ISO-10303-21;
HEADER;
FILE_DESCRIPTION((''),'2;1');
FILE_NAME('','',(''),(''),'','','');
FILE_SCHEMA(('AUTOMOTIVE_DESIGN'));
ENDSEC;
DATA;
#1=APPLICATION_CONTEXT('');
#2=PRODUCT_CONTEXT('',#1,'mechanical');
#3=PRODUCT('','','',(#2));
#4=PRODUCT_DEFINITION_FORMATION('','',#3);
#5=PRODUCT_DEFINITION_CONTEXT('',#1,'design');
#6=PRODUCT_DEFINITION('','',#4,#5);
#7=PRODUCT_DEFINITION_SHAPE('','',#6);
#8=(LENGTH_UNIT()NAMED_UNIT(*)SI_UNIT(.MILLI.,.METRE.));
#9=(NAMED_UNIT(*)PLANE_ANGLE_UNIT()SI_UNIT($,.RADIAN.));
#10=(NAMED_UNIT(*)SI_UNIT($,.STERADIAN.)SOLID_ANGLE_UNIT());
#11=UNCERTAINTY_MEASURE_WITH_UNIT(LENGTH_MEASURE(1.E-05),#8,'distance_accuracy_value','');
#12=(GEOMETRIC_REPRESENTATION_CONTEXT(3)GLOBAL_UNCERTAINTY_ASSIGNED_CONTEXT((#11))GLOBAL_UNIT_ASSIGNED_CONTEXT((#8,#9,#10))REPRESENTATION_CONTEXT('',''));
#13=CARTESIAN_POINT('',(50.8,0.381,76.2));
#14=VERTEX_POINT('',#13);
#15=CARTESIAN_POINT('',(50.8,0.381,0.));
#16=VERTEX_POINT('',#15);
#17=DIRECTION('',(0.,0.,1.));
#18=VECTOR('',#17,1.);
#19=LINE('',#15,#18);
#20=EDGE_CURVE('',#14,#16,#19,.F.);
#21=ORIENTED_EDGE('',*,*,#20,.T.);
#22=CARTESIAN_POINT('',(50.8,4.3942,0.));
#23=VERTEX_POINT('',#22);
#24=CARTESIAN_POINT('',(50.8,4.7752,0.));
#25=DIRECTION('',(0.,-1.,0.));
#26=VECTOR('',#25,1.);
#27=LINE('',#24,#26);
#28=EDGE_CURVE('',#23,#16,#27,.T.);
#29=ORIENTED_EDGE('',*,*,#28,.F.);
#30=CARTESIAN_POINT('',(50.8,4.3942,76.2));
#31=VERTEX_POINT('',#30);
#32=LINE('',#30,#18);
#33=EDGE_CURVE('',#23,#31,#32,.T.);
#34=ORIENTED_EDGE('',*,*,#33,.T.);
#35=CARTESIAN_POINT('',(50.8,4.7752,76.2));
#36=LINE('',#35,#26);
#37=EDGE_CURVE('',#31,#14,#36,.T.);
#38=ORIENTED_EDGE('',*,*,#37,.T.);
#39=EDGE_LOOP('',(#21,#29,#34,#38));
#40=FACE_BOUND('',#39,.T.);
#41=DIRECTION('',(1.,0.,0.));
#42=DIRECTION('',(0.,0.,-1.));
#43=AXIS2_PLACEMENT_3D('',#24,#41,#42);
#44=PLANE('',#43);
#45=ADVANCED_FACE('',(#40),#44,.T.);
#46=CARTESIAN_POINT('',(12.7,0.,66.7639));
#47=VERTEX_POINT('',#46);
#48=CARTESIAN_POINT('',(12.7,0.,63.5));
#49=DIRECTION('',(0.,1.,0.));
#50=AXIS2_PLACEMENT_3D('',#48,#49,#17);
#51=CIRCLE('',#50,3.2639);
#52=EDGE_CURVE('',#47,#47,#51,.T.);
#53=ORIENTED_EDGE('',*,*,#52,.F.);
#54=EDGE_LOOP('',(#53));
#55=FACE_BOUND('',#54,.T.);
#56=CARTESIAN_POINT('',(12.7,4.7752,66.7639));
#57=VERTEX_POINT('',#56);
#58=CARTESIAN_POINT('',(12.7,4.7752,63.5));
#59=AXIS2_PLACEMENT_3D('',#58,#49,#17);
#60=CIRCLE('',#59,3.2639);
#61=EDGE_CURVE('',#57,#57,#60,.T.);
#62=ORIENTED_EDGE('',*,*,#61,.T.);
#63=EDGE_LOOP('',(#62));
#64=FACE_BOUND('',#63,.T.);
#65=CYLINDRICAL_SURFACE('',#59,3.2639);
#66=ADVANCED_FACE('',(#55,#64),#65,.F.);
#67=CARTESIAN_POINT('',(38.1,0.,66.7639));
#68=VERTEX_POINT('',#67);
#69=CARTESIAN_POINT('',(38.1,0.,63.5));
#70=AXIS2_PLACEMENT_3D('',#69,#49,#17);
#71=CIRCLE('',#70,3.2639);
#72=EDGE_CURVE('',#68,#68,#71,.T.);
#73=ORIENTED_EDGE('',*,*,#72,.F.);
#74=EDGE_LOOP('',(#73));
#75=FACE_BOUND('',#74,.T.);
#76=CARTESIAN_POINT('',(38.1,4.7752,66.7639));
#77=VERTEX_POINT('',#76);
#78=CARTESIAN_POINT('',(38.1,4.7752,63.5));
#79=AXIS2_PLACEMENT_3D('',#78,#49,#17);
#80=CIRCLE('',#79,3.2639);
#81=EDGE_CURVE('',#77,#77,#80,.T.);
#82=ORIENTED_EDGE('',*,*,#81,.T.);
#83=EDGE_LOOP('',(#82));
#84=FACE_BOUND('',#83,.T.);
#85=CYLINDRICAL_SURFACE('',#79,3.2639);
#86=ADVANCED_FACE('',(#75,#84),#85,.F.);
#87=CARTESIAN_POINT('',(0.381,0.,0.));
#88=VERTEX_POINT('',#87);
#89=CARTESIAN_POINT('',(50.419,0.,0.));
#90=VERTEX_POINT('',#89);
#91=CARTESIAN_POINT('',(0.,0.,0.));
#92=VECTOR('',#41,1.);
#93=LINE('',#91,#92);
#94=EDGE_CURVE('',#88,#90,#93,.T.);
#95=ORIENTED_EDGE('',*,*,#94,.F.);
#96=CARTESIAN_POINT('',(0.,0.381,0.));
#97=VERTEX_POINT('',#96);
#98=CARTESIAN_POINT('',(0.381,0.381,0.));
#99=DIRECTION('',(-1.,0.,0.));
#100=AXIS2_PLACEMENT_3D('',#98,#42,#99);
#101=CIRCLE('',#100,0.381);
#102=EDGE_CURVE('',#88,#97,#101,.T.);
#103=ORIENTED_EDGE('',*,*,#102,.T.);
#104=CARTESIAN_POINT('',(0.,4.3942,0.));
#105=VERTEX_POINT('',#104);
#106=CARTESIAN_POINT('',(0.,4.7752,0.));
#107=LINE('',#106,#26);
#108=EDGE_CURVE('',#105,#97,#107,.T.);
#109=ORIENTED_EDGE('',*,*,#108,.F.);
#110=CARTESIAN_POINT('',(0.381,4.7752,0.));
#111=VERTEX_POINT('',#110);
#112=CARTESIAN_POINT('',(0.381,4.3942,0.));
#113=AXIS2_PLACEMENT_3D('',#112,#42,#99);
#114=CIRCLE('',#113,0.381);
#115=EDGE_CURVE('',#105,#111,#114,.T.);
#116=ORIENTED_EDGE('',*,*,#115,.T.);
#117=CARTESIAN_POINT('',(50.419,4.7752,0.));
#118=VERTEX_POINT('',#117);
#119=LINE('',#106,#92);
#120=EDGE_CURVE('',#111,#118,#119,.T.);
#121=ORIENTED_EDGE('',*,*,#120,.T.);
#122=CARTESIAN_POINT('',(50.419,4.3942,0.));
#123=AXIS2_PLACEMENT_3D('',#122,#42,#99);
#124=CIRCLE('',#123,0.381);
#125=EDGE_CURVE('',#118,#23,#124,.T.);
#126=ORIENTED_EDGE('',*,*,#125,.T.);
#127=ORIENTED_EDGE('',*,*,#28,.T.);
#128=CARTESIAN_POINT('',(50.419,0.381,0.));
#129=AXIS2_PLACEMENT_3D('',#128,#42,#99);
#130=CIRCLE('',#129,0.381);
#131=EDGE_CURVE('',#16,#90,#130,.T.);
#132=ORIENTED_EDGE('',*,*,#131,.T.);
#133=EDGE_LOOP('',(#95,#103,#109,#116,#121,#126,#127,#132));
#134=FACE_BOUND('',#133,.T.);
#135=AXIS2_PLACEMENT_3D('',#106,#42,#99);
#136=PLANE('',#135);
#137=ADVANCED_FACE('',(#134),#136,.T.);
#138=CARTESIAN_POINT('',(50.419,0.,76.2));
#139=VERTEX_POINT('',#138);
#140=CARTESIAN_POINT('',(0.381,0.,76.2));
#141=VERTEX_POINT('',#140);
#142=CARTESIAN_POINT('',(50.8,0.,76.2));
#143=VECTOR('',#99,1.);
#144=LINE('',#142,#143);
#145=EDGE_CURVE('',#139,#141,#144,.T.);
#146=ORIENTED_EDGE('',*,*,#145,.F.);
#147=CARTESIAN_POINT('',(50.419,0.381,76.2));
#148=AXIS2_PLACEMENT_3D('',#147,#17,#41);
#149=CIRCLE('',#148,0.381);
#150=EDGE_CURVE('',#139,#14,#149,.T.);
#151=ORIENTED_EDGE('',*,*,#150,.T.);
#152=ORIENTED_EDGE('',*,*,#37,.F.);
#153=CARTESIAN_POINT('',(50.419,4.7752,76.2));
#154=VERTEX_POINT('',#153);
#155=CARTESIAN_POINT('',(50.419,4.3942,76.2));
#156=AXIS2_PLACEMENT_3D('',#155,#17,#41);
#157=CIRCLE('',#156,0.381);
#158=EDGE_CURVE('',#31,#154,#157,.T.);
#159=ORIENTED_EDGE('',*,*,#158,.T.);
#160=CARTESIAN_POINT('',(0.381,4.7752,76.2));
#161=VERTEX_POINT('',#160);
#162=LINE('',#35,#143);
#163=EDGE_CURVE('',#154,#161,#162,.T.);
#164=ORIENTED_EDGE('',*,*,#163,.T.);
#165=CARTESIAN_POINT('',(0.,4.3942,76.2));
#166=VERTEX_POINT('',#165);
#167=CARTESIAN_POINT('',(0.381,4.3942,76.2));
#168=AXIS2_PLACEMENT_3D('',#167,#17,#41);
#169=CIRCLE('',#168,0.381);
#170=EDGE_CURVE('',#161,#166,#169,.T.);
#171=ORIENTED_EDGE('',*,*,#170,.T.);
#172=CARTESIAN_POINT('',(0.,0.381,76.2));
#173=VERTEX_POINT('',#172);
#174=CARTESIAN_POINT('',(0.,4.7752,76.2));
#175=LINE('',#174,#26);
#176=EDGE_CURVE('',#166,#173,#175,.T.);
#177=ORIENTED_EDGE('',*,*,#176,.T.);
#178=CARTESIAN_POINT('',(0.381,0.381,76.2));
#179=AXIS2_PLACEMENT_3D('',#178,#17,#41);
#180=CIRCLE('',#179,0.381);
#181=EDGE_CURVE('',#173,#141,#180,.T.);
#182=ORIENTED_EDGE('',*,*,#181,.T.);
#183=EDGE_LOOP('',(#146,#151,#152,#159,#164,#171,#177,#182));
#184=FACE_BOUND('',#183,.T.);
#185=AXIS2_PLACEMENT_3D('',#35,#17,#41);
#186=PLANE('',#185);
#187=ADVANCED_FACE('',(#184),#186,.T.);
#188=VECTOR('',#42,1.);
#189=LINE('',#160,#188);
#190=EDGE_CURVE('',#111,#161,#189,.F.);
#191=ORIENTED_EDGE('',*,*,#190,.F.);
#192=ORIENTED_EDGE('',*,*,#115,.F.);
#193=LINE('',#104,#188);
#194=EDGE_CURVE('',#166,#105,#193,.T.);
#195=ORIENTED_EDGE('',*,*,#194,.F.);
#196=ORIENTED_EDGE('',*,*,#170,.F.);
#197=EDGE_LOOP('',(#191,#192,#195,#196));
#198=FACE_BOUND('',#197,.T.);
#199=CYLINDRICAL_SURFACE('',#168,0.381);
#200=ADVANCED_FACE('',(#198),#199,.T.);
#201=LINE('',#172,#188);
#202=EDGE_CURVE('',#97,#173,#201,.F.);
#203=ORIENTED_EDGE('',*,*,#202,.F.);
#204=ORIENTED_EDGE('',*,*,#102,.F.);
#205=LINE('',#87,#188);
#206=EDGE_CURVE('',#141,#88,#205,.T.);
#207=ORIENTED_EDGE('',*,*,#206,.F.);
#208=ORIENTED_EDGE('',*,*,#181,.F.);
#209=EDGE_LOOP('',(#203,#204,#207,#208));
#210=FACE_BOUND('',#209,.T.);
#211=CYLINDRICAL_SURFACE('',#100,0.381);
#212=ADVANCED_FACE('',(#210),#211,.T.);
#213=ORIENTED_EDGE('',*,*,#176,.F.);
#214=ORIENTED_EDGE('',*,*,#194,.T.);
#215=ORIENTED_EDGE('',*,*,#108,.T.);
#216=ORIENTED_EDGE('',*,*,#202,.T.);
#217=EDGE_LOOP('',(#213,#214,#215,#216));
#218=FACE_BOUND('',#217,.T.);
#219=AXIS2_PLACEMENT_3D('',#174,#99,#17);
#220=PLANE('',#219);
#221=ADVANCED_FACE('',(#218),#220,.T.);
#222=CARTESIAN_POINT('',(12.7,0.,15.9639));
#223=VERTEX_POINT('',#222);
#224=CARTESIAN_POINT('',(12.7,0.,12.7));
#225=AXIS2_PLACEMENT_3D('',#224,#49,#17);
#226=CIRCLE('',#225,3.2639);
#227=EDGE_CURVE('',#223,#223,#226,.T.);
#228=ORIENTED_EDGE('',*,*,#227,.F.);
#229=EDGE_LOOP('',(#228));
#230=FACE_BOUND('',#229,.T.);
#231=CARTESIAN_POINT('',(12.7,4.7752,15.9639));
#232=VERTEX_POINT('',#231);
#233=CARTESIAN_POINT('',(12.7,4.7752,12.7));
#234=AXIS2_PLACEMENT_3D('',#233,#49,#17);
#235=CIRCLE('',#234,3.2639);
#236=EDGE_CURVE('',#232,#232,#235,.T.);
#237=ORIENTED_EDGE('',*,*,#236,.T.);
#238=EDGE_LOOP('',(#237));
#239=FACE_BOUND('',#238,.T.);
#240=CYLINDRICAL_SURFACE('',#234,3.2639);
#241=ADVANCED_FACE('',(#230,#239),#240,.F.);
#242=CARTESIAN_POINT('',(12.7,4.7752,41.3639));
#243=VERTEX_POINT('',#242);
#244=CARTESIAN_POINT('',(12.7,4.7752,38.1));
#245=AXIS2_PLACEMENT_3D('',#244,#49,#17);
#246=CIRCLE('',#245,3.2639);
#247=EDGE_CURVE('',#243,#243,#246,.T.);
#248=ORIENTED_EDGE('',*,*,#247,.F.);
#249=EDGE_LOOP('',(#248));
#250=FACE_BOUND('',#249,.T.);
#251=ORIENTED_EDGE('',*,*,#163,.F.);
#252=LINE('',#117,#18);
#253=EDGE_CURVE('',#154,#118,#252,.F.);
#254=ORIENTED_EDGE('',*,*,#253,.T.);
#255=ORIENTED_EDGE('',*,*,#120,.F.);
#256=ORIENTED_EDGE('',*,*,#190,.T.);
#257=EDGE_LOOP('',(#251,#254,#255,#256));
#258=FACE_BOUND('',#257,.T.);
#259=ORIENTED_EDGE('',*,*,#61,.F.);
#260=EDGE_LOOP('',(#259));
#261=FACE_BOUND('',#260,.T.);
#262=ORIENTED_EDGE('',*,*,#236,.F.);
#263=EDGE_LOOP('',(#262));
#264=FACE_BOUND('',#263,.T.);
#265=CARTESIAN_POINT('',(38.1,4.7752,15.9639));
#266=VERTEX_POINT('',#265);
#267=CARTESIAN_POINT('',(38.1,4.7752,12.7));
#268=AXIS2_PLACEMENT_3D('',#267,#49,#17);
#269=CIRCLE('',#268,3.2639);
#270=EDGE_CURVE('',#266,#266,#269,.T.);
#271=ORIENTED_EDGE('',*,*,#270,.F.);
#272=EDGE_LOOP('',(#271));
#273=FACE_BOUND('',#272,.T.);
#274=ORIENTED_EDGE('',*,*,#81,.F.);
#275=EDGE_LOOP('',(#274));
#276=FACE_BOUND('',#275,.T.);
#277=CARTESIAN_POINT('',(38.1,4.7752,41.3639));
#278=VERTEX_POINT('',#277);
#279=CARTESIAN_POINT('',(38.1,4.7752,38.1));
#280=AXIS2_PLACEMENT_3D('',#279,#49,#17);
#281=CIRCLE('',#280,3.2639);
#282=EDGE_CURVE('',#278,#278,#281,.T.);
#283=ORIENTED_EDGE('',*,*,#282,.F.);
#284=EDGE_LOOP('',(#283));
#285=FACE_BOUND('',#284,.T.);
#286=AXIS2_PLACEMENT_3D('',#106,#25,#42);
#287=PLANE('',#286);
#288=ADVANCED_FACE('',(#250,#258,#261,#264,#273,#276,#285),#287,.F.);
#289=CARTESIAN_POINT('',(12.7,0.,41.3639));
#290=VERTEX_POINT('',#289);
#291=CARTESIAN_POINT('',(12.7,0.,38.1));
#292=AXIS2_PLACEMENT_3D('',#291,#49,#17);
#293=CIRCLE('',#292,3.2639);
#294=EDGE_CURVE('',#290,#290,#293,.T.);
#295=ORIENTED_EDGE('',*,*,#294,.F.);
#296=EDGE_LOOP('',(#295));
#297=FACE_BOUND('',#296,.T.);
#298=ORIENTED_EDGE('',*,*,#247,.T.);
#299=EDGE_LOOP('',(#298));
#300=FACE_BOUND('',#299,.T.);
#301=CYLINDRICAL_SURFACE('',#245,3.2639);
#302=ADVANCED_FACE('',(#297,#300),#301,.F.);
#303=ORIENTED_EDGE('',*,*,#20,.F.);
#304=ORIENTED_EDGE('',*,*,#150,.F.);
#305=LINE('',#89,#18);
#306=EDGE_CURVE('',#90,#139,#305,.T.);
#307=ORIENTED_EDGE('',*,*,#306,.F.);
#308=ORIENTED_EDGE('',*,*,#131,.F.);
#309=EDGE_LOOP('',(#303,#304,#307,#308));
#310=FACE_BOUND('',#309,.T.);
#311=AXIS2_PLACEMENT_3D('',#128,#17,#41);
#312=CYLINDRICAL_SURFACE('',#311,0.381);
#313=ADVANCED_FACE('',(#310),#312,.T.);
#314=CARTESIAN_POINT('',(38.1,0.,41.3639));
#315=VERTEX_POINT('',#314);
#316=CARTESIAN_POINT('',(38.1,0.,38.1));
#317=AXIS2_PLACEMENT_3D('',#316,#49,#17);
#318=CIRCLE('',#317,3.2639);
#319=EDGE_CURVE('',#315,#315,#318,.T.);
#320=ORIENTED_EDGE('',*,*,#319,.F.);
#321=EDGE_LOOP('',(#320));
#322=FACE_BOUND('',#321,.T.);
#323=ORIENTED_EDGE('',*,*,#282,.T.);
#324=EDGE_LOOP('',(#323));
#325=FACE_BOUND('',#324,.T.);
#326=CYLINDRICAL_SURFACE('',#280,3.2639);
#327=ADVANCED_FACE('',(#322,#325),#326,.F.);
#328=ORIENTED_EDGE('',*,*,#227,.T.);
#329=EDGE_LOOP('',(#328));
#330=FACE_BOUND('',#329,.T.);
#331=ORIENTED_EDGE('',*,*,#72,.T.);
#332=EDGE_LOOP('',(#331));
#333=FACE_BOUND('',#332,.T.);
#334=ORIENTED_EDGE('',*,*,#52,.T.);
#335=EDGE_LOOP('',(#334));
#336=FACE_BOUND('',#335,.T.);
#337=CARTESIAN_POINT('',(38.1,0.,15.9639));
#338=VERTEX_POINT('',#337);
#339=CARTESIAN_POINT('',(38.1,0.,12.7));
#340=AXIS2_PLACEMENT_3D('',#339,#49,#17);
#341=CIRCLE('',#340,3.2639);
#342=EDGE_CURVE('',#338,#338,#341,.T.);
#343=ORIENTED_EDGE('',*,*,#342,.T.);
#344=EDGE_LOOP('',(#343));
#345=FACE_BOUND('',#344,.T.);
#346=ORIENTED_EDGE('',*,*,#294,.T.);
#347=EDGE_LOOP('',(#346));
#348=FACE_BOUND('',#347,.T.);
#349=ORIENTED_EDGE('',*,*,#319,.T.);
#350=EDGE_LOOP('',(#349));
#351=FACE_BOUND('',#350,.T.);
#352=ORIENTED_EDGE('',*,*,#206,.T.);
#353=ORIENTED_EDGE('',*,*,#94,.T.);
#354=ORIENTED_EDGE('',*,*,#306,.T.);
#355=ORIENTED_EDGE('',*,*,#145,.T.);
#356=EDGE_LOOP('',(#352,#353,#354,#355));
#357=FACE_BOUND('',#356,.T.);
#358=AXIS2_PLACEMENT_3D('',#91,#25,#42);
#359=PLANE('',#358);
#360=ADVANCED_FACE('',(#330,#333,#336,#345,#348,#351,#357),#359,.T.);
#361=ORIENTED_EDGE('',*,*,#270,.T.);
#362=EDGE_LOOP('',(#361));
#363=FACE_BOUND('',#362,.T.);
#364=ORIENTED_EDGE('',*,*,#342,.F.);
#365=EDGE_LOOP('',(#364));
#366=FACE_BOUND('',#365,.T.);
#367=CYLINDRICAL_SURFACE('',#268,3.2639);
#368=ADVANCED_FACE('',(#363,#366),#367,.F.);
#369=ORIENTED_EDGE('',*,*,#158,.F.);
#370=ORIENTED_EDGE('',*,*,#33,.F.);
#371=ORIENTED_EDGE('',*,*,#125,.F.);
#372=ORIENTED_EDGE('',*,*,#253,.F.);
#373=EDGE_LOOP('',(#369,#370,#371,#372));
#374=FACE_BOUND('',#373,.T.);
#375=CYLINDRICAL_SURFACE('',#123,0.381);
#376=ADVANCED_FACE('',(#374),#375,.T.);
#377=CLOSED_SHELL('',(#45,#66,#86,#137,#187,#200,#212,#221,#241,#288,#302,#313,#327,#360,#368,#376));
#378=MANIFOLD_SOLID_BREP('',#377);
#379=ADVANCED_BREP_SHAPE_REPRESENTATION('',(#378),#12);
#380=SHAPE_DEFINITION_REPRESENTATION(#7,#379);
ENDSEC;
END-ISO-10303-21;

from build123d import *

# Parameters (mm, degrees)
BOSS_EXTRUDE1_OUTLINE_W  = 4.7752
BOSS_EXTRUDE1_OUTLINE_H  = 76.2
BOSS_EXTRUDE1_DEPTH      = 50.8
F_0_257_DIAMETER_HOLE1_D = 6.5278
FILLET1_R                = 0.381
LPATTERN1_COUNT          = 4
LPATTERN1_PITCH          = 25.4
LPATTERN1_COUNT_DIR2     = 2
LPATTERN1_PITCH_DIR2     = 25.4


# Read off the part's stored shape, not the designer's step: Boss-Extrude1
with BuildPart() as part:
    # Boss-Extrude1 outline → Boss-Extrude1 (new body)
    with BuildSketch(Plane.YZ):
        with Locations((2.3876, 38.1)):
            Rectangle(BOSS_EXTRUDE1_OUTLINE_W, BOSS_EXTRUDE1_OUTLINE_H)
    extrude(amount=BOSS_EXTRUDE1_DEPTH)

    # F (0.257) Diameter Hole1 (through all)
    with Locations(Plane(origin=(0, 4.7752, 0), x_dir=(-1, 0, 0), z_dir=(0, 1, 0))):
        with Locations((-38.1, 63.5)):
            f_0_257_diameter_hole1 = Hole(F_0_257_DIAMETER_HOLE1_D / 2)

    # Fillet1
    fillet1_edges = [part.edges().sort_by_distance(p)[0] for p in [
        (50.8, 4.7752, 38.1),
        (0, 4.7752, 38.1),
        (50.8, 0, 38.1),
        (0, 0, 38.1),
    ]]
    fillet(fillet1_edges, radius=FILLET1_R)

    # LPattern1: F _0.257_ Diameter Hole1 4 × 2
    with Locations(*[(-j * LPATTERN1_PITCH_DIR2, 0, -i * LPATTERN1_PITCH) for i in range(LPATTERN1_COUNT) for j in range(LPATTERN1_COUNT_DIR2) if (i, j) != (0, 0)]):
        add(f_0_257_diameter_hole1, mode=Mode.SUBTRACT)


solid = part.part
